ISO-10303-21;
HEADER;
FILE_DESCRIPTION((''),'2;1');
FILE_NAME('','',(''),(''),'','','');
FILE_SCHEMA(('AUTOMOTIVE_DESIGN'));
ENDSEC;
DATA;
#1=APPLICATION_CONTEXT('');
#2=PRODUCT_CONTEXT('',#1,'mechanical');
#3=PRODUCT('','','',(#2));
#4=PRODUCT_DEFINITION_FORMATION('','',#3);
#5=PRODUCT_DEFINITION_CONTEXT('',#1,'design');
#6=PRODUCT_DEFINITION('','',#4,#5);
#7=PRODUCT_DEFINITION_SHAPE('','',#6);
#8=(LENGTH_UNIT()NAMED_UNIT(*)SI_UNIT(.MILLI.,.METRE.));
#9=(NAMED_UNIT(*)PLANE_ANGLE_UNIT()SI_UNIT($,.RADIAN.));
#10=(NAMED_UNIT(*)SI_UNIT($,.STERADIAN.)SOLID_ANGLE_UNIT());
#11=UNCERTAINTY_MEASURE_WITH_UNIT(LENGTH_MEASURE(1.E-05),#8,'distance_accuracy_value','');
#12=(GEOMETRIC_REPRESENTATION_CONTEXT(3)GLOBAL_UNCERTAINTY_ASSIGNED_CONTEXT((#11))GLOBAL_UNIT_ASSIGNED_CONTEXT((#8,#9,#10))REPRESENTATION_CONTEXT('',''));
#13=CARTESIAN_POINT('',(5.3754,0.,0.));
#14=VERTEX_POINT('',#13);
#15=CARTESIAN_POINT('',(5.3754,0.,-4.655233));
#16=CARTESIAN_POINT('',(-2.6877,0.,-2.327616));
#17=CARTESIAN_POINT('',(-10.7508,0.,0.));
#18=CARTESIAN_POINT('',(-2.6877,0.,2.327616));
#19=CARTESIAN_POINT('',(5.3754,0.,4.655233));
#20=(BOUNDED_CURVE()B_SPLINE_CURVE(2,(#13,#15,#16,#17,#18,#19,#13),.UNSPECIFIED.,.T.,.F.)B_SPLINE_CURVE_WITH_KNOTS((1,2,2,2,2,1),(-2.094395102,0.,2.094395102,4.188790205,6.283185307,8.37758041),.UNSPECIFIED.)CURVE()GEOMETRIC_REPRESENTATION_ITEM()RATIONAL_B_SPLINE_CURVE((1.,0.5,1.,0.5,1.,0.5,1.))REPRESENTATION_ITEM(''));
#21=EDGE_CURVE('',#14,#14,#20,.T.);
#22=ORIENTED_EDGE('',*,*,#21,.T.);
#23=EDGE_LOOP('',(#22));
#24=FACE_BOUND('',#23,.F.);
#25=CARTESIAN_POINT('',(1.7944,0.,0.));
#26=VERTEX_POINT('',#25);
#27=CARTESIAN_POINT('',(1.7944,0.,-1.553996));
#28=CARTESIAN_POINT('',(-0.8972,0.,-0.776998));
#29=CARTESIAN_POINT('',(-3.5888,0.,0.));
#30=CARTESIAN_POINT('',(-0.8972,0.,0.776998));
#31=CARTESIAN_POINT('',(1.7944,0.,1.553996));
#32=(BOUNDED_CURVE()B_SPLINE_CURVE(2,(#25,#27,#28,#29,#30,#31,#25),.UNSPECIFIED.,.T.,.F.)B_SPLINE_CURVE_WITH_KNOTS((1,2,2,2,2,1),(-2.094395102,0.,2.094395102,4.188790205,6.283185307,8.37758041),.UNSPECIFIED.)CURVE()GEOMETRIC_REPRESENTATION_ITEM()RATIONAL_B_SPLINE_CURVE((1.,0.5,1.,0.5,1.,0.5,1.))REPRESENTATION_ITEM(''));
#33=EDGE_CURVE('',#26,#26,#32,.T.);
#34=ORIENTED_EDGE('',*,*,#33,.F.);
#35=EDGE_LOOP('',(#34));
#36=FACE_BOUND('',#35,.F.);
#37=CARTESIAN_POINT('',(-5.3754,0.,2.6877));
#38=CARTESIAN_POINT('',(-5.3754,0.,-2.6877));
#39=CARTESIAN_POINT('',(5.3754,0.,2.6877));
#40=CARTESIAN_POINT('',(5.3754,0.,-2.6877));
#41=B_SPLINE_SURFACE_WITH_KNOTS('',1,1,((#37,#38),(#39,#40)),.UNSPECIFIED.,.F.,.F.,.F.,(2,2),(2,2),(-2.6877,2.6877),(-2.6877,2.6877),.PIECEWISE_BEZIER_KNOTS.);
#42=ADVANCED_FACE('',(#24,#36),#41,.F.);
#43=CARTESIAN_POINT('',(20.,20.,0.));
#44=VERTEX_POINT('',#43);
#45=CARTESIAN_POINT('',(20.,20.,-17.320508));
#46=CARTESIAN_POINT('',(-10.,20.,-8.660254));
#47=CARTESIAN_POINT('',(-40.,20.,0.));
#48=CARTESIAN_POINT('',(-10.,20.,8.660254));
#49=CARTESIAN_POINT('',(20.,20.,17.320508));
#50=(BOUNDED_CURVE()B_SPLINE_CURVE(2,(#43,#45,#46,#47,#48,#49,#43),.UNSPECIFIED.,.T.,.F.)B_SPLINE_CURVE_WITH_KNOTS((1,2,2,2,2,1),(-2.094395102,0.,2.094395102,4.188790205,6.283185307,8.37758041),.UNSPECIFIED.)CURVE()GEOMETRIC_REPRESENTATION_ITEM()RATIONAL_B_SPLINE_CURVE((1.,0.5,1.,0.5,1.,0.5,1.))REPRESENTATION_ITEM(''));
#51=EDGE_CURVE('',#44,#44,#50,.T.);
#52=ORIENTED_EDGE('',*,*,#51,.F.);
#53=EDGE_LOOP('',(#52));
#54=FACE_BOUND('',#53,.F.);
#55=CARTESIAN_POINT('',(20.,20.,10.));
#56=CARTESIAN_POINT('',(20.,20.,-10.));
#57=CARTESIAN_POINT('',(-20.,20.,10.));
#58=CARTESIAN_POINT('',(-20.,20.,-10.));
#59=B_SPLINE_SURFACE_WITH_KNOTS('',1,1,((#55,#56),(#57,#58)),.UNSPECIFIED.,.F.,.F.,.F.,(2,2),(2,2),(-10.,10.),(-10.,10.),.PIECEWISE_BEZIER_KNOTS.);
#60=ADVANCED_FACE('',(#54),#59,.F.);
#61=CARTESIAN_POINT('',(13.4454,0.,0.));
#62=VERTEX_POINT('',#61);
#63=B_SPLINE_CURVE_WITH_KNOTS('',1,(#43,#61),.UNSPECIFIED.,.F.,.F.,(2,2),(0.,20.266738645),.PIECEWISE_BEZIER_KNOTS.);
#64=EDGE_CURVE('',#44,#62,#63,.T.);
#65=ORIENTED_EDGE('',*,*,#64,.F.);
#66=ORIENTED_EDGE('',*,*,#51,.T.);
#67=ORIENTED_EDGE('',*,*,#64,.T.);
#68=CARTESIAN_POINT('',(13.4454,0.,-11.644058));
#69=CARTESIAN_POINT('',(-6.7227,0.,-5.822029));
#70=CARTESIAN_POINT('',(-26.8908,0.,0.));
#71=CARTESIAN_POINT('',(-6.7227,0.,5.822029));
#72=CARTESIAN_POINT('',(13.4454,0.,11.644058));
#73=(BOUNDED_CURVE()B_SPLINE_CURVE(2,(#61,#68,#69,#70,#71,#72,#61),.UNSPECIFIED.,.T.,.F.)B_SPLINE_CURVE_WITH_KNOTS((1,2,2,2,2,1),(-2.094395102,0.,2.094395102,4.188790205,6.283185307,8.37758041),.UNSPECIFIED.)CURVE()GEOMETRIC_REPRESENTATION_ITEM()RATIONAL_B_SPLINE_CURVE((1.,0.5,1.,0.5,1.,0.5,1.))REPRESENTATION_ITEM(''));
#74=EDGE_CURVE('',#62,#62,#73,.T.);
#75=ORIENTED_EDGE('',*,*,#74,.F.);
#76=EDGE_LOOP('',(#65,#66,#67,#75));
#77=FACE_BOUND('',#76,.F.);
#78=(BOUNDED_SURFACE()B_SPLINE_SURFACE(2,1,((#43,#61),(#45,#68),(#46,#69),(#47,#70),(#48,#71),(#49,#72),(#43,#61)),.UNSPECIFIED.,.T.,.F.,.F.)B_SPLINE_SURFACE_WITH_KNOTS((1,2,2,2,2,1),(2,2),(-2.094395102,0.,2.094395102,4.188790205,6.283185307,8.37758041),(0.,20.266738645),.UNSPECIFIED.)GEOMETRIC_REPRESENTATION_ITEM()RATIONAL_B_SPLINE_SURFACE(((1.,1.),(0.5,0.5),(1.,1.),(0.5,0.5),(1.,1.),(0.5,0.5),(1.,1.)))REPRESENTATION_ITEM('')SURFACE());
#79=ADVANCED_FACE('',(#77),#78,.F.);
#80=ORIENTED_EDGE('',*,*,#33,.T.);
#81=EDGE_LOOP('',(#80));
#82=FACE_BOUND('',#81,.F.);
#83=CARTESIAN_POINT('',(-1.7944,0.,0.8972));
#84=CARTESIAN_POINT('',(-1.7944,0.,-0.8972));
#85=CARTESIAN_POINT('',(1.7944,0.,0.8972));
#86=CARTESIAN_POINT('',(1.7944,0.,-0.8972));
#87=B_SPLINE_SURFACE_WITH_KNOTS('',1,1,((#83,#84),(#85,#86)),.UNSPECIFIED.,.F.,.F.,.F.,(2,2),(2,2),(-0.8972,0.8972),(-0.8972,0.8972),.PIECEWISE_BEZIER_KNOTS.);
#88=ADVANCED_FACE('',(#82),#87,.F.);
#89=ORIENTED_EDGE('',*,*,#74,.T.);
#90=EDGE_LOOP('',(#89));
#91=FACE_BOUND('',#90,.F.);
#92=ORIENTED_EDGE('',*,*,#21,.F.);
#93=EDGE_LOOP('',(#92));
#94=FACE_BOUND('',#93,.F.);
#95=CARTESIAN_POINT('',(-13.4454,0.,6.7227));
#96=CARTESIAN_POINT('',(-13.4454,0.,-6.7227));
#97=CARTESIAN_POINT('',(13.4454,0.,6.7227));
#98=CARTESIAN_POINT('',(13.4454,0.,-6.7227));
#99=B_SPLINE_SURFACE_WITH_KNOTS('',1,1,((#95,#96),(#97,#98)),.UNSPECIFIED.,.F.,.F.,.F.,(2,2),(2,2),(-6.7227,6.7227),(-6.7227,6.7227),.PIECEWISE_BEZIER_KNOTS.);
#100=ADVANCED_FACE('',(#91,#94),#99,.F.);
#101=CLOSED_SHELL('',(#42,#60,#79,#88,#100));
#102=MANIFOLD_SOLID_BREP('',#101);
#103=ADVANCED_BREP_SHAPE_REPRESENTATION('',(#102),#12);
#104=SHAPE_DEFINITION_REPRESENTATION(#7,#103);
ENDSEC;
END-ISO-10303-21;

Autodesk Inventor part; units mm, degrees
ref_plane "YZ Plane" through (0, 0, 0) normal (1, 0, 0) x (0, 1, 0)
ref_plane "XZ Plane" through (0, 0, 0) normal (0, 1, 0) x (-1, 0, 0)
ref_plane "XY Plane" through (0, 0, 0) normal (0, 0, 1) x (1, 0, 0)
sketch "Sketch1" plane through (0, 0, 0) normal (0, 0, 1) x (1, 0, 0)
  line L0 (0.8972, 0) -> (0, 0)
  line L1 (0, 0) -> (0, 4.621)
  line L2 (0, 0) -> (0, 20)
  line L3 (0, 20) -> (10, 20)
  line L4 (2.6877, 0) -> (0, 0)
  line L5 (10, 20) -> (6.7227, 0)
  line L6 (6.7227, 0) -> (0, 0)
  dimension "d1" = 20
  dimension "d2" = 10
revolve "Revolution1" add sketch "Sketch1" angle 360 about axis through (0, 0, 0) along (0, 1, 0)
scale "Scale1" factors (2, 1, 1) then translate (0, 0, 0) bodies 1
properties part number "Handle"
